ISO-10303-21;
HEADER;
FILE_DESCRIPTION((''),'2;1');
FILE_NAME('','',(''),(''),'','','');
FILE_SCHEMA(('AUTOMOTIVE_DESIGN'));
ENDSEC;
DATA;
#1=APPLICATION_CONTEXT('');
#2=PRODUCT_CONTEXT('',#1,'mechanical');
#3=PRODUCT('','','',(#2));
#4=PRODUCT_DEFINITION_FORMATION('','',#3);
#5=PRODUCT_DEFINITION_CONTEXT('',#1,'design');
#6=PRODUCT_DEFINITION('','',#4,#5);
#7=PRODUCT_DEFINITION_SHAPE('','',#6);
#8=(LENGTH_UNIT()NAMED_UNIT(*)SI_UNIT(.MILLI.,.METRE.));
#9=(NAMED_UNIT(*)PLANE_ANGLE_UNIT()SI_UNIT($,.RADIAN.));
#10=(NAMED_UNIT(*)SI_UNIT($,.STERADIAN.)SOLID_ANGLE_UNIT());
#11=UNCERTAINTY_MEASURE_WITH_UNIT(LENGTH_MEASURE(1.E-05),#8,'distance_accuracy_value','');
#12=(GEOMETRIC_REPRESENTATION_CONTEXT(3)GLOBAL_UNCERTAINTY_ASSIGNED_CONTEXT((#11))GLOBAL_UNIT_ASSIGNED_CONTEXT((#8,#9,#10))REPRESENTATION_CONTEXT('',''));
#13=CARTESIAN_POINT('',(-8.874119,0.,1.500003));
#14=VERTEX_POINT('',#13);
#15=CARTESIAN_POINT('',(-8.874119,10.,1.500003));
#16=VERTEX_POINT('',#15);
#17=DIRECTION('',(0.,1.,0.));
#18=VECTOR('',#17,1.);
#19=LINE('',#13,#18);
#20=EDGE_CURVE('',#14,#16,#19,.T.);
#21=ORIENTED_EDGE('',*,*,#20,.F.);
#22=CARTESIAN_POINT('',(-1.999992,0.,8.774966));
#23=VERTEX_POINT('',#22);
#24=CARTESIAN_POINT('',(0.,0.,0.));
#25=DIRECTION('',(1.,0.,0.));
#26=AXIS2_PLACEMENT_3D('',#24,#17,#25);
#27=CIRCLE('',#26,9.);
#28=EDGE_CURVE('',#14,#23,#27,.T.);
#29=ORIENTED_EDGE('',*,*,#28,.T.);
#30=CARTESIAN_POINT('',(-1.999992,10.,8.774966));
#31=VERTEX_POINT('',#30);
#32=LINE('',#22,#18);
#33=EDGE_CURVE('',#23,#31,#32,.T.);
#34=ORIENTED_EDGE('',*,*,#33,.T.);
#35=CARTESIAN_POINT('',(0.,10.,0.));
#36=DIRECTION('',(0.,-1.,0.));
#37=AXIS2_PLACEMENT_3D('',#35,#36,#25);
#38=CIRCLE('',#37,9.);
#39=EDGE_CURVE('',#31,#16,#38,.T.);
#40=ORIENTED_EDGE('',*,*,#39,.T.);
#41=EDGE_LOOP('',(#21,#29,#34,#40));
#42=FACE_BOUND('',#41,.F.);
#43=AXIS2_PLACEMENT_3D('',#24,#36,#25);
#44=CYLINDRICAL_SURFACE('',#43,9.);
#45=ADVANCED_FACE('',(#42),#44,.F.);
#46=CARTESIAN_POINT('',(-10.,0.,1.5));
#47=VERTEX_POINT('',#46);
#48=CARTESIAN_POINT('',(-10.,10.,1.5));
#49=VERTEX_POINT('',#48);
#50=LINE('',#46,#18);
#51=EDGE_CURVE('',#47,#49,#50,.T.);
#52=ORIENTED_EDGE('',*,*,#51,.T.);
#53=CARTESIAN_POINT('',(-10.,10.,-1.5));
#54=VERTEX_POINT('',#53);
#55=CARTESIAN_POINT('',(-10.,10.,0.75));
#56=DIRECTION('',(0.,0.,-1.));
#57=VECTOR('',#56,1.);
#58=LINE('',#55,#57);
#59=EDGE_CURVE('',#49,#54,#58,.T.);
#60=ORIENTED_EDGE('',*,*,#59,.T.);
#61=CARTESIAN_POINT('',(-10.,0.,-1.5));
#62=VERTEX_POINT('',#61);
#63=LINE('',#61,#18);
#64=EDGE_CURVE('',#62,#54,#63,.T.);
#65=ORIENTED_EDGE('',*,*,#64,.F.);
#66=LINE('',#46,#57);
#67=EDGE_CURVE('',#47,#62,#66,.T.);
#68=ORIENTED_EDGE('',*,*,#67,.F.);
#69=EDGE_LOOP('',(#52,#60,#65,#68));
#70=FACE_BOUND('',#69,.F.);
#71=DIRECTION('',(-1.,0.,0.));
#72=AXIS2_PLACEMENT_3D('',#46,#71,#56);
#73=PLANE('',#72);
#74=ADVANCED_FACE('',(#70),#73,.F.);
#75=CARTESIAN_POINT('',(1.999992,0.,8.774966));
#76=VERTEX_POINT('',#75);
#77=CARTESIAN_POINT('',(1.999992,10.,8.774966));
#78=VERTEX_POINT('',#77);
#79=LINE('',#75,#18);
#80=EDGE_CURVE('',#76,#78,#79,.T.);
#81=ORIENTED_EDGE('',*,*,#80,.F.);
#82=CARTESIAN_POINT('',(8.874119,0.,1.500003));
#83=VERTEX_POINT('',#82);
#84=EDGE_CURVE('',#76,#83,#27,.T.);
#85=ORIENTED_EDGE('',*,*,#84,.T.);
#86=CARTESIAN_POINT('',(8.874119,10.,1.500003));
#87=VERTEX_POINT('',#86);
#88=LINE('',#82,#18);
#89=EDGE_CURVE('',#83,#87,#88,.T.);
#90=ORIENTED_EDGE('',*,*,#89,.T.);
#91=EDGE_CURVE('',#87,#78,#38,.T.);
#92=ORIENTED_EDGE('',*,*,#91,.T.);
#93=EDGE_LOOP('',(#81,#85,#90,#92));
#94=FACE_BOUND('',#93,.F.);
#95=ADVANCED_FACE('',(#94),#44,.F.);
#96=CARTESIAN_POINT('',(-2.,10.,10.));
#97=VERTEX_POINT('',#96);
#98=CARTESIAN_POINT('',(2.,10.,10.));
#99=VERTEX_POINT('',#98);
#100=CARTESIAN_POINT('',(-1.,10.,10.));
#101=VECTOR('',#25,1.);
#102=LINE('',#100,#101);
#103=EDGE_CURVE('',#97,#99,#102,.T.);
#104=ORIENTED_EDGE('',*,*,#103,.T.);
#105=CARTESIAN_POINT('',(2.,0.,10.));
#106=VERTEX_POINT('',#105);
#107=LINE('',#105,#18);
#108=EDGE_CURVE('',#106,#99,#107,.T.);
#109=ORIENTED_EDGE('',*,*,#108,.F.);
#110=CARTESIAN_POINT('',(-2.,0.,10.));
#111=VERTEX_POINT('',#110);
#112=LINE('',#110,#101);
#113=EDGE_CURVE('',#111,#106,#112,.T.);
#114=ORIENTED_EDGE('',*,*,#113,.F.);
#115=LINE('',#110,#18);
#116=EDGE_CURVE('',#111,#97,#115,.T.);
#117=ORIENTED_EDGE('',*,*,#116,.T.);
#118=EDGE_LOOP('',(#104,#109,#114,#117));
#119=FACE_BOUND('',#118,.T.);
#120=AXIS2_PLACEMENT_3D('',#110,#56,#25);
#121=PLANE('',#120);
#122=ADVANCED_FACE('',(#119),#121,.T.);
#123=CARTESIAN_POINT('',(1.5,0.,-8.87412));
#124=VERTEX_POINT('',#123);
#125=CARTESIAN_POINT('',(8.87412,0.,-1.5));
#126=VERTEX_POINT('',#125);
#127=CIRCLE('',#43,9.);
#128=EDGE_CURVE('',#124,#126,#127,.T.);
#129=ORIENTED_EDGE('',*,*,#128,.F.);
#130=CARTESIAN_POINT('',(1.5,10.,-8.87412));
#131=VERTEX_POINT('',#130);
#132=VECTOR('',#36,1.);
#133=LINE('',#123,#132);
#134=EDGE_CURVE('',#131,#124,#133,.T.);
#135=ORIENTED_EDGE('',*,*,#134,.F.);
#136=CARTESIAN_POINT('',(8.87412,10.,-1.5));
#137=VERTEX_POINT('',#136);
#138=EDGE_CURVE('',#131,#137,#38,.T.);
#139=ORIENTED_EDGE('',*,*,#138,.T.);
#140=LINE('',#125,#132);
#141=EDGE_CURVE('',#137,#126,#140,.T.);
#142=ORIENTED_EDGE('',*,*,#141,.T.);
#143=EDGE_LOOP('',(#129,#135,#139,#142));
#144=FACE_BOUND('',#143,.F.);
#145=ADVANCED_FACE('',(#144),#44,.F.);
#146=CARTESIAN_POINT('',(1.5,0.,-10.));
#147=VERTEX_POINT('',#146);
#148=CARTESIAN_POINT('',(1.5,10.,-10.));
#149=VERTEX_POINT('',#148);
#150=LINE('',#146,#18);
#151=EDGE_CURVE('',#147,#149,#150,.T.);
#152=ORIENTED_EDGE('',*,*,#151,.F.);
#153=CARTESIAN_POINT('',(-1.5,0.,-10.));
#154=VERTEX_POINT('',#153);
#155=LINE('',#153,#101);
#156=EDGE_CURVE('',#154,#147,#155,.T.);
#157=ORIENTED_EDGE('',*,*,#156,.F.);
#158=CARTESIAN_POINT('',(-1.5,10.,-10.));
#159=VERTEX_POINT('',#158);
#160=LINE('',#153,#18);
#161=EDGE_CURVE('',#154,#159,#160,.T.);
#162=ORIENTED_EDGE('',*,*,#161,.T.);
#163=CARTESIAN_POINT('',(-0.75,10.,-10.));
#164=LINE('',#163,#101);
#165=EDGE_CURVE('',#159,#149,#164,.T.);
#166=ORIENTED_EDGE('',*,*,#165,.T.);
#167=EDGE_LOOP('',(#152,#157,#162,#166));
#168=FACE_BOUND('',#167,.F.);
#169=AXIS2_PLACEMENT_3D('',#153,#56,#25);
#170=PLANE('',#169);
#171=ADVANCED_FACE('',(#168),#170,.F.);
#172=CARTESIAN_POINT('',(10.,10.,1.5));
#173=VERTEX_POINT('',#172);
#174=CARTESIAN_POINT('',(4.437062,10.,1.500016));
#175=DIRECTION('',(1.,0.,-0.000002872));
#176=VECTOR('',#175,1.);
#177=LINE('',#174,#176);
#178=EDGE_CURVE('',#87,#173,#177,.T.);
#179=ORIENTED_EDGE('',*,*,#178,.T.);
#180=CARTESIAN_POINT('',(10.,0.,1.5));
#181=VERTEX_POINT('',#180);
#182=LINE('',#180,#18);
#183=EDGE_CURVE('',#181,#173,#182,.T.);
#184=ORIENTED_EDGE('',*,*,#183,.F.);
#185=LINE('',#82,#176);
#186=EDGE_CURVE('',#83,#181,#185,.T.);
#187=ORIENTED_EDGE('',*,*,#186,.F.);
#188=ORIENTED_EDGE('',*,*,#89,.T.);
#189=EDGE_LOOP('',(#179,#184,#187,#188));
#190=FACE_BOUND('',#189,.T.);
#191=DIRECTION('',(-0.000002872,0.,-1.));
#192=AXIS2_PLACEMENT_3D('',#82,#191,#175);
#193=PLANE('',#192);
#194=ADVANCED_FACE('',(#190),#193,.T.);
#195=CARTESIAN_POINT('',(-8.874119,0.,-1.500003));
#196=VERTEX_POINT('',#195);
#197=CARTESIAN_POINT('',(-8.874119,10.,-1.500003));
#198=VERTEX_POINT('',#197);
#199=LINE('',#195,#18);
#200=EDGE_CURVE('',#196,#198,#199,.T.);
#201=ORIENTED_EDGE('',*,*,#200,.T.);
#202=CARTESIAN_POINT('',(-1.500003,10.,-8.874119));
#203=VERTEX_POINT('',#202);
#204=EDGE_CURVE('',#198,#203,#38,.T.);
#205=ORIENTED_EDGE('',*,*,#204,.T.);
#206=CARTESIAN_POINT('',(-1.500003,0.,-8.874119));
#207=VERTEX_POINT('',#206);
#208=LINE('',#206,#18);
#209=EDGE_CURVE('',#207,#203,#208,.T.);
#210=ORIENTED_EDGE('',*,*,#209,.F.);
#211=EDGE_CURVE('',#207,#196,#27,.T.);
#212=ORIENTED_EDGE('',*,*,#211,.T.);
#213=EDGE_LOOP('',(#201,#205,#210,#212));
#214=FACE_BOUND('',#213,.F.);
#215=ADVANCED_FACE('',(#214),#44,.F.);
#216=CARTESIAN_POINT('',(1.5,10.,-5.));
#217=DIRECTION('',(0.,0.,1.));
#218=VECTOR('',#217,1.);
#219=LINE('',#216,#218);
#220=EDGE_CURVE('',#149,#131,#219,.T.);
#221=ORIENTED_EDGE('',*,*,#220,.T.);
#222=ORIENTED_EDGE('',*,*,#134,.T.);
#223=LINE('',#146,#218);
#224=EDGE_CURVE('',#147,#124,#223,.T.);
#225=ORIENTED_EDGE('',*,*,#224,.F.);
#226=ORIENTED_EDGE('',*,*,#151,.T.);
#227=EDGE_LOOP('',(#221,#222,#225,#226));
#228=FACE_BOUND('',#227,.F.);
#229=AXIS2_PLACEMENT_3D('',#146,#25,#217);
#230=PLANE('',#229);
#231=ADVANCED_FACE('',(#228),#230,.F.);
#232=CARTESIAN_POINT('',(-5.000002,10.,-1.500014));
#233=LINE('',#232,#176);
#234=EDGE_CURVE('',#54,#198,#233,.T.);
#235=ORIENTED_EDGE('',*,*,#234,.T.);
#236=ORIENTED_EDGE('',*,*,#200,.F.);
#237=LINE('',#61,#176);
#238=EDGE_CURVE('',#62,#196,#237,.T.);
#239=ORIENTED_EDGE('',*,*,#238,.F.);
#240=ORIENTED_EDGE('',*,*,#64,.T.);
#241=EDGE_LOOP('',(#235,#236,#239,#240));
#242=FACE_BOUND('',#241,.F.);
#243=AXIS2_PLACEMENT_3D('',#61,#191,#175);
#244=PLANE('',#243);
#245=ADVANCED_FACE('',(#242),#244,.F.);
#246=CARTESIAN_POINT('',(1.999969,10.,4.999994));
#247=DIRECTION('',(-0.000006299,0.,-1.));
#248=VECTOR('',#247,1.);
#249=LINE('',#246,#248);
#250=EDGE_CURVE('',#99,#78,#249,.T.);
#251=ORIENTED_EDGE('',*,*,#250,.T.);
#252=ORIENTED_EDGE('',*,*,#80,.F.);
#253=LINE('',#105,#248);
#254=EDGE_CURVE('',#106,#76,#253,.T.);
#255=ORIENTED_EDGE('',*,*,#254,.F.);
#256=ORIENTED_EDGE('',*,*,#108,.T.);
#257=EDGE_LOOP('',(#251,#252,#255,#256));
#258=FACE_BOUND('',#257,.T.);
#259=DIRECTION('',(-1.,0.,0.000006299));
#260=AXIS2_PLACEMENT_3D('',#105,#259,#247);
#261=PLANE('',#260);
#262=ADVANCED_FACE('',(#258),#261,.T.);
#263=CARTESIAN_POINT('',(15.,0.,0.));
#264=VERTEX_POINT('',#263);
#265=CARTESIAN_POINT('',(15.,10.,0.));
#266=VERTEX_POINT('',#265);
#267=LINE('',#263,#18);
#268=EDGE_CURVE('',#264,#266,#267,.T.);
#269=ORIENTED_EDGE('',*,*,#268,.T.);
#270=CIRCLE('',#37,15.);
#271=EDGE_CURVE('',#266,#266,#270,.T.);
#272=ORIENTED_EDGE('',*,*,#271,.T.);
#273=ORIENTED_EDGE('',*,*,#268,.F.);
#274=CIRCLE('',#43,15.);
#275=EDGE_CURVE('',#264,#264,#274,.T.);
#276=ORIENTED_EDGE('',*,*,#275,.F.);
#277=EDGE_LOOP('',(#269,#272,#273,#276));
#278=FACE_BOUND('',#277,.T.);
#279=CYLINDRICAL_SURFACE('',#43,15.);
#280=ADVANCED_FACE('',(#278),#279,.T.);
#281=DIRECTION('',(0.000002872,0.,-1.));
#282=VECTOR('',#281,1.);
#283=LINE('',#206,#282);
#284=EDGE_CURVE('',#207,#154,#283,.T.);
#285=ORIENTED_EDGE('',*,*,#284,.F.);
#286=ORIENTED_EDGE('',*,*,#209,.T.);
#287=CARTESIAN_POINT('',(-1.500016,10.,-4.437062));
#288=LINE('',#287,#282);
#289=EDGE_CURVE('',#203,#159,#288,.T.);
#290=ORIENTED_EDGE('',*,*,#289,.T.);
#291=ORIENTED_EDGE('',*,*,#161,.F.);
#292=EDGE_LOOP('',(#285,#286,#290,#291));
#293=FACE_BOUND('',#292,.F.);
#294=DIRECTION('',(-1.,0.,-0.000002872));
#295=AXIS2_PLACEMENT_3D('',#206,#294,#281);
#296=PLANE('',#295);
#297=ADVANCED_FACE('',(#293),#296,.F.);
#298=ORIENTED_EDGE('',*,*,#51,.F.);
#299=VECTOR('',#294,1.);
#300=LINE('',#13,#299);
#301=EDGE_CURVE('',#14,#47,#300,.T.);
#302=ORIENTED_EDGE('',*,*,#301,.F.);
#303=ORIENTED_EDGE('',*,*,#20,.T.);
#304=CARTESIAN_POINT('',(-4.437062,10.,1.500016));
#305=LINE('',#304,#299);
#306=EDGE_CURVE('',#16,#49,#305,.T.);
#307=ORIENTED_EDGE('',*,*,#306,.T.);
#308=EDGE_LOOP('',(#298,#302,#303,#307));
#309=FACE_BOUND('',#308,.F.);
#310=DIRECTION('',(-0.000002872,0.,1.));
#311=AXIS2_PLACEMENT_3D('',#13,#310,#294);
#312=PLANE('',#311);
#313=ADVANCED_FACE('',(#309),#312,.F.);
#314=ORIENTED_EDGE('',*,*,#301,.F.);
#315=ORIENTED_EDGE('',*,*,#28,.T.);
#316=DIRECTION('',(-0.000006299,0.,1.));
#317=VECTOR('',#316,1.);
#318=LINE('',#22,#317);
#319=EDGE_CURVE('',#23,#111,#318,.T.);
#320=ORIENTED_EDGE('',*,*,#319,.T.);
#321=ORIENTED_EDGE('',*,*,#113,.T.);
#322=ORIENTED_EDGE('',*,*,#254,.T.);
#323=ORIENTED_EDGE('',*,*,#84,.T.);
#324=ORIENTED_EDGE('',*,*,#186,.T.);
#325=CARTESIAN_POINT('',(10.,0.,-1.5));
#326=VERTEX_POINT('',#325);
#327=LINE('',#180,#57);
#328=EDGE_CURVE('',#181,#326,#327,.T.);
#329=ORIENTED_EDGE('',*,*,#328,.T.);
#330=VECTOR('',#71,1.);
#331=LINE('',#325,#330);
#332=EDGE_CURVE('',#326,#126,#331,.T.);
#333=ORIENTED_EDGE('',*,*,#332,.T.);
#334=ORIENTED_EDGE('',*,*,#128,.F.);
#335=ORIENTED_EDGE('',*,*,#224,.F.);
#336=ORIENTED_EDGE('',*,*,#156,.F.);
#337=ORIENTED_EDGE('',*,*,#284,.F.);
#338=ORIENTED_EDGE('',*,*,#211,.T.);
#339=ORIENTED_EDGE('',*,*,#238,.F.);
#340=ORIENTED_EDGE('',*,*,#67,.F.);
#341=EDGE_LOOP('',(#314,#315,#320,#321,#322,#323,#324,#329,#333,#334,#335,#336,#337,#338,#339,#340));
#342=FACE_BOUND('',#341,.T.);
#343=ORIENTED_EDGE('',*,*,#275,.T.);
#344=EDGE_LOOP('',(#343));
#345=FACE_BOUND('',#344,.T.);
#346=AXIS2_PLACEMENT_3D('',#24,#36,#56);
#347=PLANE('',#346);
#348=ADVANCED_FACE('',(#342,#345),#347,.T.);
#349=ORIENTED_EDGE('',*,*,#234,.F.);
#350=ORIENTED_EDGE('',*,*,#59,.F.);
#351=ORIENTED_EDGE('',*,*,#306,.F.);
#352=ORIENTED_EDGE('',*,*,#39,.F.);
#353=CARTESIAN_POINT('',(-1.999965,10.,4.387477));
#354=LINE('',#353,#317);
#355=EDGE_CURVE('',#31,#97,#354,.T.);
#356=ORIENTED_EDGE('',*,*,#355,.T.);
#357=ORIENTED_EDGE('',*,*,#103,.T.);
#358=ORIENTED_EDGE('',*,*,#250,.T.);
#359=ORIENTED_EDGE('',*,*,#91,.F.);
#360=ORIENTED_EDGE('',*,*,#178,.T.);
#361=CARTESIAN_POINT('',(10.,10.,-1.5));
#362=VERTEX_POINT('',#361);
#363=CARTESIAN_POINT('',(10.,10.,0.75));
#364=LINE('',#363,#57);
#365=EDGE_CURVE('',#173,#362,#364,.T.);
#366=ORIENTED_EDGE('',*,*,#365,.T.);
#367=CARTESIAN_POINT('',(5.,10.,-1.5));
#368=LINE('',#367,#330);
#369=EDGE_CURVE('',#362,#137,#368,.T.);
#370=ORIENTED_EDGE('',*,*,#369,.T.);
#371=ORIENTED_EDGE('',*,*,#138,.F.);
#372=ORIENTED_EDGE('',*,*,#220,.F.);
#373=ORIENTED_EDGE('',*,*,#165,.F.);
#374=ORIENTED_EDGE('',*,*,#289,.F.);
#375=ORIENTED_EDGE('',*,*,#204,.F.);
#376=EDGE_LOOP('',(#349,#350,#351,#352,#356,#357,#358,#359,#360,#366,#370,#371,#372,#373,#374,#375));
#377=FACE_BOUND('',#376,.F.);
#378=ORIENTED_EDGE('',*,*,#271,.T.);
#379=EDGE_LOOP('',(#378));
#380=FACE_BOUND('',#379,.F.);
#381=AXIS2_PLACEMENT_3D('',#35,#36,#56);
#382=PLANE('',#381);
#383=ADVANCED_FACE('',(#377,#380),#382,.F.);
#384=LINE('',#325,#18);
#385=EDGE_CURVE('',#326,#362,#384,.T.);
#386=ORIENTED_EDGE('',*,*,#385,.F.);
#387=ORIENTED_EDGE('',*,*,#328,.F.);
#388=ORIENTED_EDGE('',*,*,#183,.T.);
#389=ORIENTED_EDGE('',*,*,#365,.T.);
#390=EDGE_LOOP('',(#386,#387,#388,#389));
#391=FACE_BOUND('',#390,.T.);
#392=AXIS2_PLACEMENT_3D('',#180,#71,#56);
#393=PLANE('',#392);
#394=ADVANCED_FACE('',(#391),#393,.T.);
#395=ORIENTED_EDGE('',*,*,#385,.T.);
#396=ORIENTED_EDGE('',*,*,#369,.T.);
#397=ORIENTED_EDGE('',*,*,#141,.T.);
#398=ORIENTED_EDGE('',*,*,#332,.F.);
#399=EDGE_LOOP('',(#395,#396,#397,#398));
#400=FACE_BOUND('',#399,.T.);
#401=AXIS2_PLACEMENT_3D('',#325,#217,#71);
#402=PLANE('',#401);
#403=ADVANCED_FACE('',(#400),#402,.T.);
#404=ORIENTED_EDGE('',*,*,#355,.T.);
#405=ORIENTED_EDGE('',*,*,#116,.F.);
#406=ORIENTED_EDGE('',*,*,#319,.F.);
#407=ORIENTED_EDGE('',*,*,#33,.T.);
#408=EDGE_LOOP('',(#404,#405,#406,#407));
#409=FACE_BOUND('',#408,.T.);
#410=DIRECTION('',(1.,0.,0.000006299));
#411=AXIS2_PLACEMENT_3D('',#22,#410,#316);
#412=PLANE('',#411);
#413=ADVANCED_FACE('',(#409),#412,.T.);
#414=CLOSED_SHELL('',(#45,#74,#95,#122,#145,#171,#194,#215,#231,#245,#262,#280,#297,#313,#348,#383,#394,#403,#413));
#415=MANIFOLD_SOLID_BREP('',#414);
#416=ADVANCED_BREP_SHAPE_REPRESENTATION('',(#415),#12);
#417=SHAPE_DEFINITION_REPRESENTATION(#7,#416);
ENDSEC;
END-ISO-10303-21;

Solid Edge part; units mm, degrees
sketch "Sketch1" plane through (0, 0, 0) normal (0, -1, 0) x (1, 0, 0)
  circle A0 centre (0, 0) radius 15
  circle A1 centre (0, 0) radius 9
  dimension "D1" = 30
  dimension "D2" = 18
extrude "Protrusion1" add sketch "Sketch1" against normal blind 10
sketch "Sketch2" plane through (0, 0, 0) normal (0, -1, 0) x (1, 0, 0)
  line L0 (-2, 8.775) -> (-2, 10)
  line L1 (-2, 10) -> (2, 10)
  line L2 (2, 10) -> (2, 8.775)
  arc A0 (2, 8.775) -> (8.8741, 1.5) centre (0, 0) cw
  line L3 (8.8741, 1.5) -> (10, 1.5)
  line L4 (10, 1.5) -> (10, -1.5)
  line L5 (10, -1.5) -> (8.8741, -1.5)
  line L6 (1.5, -10) -> (1.5, -8.8741)
  line L7 (-1.5, -10) -> (1.5, -10)
  line L8 (-1.5, -8.8741) -> (-1.5, -10)
  arc A1 (-1.5, -8.8741) -> (-8.8741, -1.5) centre (0, 0) cw
  line L9 (-10, -1.5) -> (-8.8741, -1.5)
  line L10 (-10, 1.5) -> (-10, -1.5)
  line L11 (-8.8741, 1.5) -> (-10, 1.5)
  arc A2 (-8.8741, 1.5) -> (-2, 8.775) centre (0, 0) cw
  line L12 (8.8741, -1.5) -> (1.5, -8.8741)
  dimension "D1" = 10
  dimension "D2" = 10
  dimension "D3" = 4
  dimension "D4" = 3
  dimension "D5" = 3
  dimension "D6" = 3
  dimension "D7" = 10
  dimension "D8" = 10
extrude "Extrusionsausschnitt_1" cut sketch "Sketch2" against normal blind 517
